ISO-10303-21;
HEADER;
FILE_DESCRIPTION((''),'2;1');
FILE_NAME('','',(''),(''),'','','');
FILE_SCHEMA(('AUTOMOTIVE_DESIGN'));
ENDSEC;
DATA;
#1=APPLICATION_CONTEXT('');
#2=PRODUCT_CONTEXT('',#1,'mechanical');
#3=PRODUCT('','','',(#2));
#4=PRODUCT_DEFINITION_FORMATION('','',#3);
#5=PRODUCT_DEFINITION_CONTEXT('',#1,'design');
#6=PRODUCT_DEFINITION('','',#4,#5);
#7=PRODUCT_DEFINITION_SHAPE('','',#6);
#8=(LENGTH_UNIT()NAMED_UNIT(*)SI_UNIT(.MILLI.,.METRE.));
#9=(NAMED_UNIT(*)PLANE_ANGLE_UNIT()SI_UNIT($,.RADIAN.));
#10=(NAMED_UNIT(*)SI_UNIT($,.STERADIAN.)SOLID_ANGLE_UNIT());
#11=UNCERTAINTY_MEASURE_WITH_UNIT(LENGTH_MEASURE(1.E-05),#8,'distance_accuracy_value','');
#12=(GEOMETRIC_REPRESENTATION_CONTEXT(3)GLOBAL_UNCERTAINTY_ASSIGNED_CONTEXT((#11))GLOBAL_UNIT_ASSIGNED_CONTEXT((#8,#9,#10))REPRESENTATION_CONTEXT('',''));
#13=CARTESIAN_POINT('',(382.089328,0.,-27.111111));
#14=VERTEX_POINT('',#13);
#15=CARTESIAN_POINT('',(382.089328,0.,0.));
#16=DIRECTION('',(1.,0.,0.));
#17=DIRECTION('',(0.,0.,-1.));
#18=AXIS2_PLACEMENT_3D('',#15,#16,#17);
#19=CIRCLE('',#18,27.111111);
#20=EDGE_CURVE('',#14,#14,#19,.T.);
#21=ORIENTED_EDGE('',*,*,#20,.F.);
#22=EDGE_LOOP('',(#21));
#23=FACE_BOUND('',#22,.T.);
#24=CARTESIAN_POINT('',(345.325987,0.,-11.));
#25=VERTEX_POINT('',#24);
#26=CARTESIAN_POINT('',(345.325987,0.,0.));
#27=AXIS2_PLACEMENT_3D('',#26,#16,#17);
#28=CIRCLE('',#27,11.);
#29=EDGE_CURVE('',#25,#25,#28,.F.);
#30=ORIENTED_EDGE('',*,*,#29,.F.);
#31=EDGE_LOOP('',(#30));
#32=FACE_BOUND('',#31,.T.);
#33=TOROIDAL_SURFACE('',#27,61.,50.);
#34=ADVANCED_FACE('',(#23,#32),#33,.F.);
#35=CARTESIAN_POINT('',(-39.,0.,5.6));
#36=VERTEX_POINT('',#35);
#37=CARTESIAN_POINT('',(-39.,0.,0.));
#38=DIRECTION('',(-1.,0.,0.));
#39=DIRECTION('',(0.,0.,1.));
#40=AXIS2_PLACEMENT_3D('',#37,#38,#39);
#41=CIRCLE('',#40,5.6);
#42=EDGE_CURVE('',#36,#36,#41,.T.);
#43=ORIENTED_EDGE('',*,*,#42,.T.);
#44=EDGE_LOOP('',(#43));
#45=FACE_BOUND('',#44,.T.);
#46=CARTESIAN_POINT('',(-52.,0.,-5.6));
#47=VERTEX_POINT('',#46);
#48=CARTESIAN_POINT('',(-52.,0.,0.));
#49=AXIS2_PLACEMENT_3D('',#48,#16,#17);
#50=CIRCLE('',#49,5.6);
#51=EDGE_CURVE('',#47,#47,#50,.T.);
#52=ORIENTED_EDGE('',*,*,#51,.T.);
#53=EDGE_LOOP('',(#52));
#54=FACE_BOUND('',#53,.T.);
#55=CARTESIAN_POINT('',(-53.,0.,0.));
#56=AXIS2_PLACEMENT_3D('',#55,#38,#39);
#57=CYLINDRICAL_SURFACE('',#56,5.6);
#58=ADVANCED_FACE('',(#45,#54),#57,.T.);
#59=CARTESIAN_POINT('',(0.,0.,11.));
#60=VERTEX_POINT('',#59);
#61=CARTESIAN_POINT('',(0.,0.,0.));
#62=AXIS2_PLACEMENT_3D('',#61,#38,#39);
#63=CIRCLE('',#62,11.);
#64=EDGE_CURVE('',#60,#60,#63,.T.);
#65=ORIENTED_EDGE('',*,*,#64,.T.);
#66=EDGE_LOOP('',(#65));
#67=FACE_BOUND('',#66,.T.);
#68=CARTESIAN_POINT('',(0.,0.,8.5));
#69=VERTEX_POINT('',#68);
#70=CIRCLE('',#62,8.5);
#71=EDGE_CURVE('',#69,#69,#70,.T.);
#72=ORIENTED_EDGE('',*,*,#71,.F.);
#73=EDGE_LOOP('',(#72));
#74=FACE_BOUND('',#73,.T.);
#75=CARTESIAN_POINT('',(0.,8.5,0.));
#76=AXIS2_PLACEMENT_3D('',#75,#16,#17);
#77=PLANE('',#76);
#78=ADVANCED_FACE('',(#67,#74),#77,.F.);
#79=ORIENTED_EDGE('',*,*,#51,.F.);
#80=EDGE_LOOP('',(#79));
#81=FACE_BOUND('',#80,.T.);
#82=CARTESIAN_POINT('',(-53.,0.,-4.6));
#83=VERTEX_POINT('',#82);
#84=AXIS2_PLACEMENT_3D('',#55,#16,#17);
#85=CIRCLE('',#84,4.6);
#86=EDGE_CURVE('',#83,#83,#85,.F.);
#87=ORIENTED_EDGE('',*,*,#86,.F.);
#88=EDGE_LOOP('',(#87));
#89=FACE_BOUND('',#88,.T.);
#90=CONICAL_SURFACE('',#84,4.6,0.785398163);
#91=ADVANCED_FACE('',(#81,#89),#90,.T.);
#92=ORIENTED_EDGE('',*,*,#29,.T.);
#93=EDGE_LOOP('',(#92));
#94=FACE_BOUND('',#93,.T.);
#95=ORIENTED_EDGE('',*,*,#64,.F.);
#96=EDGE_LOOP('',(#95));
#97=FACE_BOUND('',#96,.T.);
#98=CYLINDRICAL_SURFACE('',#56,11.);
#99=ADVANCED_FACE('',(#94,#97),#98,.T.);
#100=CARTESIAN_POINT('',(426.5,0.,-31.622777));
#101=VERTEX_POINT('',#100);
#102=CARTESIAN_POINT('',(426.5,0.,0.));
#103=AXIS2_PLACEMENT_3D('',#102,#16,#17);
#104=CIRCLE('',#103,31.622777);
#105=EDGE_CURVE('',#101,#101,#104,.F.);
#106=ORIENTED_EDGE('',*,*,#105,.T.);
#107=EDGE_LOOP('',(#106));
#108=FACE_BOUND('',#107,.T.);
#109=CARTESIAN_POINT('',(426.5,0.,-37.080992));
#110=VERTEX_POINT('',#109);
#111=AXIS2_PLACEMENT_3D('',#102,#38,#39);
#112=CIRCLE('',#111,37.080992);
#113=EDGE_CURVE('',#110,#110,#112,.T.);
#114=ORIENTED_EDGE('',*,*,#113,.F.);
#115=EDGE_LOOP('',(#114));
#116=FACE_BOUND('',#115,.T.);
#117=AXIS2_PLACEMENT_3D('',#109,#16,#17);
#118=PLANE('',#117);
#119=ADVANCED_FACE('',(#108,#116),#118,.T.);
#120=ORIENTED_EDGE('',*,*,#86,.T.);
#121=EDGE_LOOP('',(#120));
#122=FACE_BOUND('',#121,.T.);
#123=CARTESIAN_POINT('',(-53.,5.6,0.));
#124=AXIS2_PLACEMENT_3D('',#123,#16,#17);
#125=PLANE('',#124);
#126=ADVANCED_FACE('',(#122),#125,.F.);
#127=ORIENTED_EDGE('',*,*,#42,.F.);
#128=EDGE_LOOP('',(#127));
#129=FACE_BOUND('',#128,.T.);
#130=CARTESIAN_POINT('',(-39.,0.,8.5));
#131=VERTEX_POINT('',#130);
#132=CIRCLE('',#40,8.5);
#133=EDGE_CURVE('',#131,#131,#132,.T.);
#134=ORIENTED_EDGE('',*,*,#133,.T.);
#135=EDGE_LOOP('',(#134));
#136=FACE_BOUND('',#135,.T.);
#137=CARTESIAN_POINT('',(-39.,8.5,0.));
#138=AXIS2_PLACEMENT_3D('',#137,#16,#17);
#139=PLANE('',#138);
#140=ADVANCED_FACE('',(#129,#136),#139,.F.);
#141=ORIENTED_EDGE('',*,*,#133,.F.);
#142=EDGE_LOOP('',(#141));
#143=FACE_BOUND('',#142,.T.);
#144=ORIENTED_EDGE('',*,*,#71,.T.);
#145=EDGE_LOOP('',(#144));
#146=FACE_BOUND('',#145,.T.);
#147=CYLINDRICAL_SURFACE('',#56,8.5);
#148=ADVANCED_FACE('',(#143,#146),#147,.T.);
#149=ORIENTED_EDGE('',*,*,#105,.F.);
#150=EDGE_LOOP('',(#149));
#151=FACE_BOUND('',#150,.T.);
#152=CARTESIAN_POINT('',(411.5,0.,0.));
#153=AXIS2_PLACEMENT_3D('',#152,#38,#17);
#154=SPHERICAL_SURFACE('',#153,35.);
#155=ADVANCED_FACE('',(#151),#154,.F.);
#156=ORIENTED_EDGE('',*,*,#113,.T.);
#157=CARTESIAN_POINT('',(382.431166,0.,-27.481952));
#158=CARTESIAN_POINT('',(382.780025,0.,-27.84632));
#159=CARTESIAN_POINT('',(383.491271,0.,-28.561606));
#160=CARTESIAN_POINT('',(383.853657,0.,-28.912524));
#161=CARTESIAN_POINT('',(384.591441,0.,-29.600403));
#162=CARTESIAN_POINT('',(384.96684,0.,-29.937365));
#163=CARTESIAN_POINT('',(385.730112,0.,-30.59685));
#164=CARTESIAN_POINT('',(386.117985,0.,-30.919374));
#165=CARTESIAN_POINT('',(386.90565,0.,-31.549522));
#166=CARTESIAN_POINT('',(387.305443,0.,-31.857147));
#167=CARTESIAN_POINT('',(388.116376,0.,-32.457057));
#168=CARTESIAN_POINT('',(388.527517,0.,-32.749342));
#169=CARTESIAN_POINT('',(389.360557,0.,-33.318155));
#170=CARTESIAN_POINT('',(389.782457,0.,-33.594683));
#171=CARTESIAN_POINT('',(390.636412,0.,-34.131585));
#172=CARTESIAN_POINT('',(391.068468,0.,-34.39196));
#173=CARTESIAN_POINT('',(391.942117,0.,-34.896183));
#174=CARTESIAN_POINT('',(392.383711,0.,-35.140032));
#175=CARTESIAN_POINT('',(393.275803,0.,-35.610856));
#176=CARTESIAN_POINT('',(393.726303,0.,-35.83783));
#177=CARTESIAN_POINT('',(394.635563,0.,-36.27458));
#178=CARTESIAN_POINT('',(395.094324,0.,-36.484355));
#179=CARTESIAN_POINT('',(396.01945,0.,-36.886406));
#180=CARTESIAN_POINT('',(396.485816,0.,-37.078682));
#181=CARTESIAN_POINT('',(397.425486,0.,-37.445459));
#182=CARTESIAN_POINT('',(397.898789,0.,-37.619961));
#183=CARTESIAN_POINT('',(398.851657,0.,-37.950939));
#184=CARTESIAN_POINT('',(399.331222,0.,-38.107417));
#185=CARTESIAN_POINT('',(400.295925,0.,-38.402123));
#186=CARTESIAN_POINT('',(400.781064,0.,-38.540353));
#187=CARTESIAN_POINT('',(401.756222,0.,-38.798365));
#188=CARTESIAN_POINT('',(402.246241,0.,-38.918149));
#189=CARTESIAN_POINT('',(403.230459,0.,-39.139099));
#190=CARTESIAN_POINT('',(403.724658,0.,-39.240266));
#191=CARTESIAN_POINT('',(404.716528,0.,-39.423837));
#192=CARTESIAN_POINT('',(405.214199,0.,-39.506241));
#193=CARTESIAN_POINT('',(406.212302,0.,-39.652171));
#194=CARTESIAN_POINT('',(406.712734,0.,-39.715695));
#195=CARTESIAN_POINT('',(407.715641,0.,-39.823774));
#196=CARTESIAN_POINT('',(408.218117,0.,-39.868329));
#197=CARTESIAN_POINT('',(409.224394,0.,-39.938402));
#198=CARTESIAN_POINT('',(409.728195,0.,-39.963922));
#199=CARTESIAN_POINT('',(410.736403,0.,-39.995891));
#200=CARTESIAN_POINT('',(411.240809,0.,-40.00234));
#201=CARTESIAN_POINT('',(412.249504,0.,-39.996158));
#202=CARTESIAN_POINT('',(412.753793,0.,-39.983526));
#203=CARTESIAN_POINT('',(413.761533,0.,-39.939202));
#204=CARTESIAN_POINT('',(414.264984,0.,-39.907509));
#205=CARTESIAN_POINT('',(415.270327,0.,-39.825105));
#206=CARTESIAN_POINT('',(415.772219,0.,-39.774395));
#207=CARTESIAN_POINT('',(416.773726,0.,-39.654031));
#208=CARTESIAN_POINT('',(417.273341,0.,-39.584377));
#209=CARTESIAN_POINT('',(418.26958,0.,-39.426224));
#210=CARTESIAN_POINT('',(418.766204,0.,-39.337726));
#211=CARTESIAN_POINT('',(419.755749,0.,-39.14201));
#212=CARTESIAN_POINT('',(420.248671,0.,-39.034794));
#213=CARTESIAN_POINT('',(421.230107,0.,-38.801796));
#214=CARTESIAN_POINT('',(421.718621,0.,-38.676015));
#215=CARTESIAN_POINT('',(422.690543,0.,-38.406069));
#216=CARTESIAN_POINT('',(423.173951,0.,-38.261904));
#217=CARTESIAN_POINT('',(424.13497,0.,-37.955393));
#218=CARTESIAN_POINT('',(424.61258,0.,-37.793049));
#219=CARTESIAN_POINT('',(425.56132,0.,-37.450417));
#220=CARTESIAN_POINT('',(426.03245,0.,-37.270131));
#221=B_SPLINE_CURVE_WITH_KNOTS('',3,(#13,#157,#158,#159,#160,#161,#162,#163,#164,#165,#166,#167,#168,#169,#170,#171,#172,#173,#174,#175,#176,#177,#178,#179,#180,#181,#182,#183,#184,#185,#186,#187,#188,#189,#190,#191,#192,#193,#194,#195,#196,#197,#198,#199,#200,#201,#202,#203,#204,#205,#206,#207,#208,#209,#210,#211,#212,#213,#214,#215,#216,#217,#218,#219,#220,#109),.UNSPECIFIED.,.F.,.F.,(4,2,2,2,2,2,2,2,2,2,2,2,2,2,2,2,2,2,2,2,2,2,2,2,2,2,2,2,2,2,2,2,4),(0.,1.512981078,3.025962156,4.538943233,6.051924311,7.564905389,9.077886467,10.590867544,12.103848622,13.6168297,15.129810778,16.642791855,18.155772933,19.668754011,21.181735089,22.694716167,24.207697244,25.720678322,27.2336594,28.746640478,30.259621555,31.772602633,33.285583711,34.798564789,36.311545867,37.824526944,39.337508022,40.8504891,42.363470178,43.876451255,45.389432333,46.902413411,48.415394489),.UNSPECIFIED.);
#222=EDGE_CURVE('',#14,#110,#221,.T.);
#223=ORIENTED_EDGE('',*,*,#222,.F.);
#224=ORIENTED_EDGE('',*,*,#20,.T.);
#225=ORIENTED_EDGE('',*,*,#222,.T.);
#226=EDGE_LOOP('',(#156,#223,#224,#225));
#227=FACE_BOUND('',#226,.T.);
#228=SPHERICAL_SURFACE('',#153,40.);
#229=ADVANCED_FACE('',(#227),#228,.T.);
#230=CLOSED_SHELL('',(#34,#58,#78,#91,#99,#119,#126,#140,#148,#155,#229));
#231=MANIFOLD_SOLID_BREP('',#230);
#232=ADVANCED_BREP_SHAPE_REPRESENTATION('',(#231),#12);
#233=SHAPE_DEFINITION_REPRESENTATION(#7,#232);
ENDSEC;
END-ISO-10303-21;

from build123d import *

# Parameters (mm, degrees)
CHAMFER1_SIZE = 1


with BuildPart() as part:
    # Sketch1 → Revolve1 (revolve)
    with BuildSketch(Plane.XY, mode=Mode.PRIVATE) as revolve1_sk:
        Polygon((-39, 8.5), (-39, 5.6), (-53, 5.6), (-53, 0), (411.5, 0), (411.5, 11), (0, 11), (0, 8.5), align=None)
    revolve(revolve1_sk.sketch.rotate(Axis((-53, 0, 0), (1, 0, 0)), 90), axis=Axis((-53, 0, 0), (1, 0, 0)))

    # Chamfer1
    chamfer1_edges = [part.edges().sort_by_distance(p)[0] for p in [
        (-53, 0, -5.6),
    ]]
    chamfer(chamfer1_edges, length=CHAMFER1_SIZE)

    # Sketch2 → Revolve2 (revolve)
    with BuildSketch(Plane(origin=(0, 0, 0), x_dir=(1, 0, 0), z_dir=(0, 1, 0))):
        with BuildLine():
            Line((371.5, 0), (451.5, 0))
            ThreePointArc((451.5, 0), (411.5, 40), (371.5, 0))
        make_face()
    revolve(axis=Axis((371.5, 0, 0), (1, 0, 0)))

    # Fillet1: read off the stored shape, not the designer's step
    # Fillet1 outline → Fillet1 (revolve)
    with BuildSketch(Plane.YX):
        with BuildLine():
            ThreePointArc((11, 345.325986974), (15.20456112, 365.395311272), (27.111111111, 382.089327544))
            Line((27.111111111, 382.089327544), (11, 382.089327544))
            Line((11, 382.089327544), (11, 345.325986974))
        make_face()
    revolve(axis=Axis((0, 0, 0), (1, 0, 0)))

    # Sketch3 → Cut-Revolve1 (revolve, cut)
    with BuildSketch(Plane(origin=(0, 0, 0), x_dir=(1, 0, 0), z_dir=(0, 1, 0))):
        with BuildLine():
            Line((426.5, 0), (451.5, 0))
            ThreePointArc((451.5, 0), (444.666247904, 22.360679775), (426.5, 37.080992435))
            Line((426.5, 37.080992435), (426.5, 0))
        make_face()
    revolve(axis=Axis((426.5, 0, 0), (1, 0, 0)), mode=Mode.SUBTRACT)

    # Sketch4 → Cut-Revolve2 (revolve, cut)
    with BuildSketch(Plane(origin=(0, 0, 0), x_dir=(1, 0, 0), z_dir=(0, 1, 0))):
        with BuildLine():
            Line((376.5, 0), (446.5, 0))
            ThreePointArc((446.5, 0), (411.5, 35), (376.5, 0))
        make_face()
    revolve(axis=Axis((376.5, 0, 0), (1, 0, 0)), mode=Mode.SUBTRACT)


solid = part.part
